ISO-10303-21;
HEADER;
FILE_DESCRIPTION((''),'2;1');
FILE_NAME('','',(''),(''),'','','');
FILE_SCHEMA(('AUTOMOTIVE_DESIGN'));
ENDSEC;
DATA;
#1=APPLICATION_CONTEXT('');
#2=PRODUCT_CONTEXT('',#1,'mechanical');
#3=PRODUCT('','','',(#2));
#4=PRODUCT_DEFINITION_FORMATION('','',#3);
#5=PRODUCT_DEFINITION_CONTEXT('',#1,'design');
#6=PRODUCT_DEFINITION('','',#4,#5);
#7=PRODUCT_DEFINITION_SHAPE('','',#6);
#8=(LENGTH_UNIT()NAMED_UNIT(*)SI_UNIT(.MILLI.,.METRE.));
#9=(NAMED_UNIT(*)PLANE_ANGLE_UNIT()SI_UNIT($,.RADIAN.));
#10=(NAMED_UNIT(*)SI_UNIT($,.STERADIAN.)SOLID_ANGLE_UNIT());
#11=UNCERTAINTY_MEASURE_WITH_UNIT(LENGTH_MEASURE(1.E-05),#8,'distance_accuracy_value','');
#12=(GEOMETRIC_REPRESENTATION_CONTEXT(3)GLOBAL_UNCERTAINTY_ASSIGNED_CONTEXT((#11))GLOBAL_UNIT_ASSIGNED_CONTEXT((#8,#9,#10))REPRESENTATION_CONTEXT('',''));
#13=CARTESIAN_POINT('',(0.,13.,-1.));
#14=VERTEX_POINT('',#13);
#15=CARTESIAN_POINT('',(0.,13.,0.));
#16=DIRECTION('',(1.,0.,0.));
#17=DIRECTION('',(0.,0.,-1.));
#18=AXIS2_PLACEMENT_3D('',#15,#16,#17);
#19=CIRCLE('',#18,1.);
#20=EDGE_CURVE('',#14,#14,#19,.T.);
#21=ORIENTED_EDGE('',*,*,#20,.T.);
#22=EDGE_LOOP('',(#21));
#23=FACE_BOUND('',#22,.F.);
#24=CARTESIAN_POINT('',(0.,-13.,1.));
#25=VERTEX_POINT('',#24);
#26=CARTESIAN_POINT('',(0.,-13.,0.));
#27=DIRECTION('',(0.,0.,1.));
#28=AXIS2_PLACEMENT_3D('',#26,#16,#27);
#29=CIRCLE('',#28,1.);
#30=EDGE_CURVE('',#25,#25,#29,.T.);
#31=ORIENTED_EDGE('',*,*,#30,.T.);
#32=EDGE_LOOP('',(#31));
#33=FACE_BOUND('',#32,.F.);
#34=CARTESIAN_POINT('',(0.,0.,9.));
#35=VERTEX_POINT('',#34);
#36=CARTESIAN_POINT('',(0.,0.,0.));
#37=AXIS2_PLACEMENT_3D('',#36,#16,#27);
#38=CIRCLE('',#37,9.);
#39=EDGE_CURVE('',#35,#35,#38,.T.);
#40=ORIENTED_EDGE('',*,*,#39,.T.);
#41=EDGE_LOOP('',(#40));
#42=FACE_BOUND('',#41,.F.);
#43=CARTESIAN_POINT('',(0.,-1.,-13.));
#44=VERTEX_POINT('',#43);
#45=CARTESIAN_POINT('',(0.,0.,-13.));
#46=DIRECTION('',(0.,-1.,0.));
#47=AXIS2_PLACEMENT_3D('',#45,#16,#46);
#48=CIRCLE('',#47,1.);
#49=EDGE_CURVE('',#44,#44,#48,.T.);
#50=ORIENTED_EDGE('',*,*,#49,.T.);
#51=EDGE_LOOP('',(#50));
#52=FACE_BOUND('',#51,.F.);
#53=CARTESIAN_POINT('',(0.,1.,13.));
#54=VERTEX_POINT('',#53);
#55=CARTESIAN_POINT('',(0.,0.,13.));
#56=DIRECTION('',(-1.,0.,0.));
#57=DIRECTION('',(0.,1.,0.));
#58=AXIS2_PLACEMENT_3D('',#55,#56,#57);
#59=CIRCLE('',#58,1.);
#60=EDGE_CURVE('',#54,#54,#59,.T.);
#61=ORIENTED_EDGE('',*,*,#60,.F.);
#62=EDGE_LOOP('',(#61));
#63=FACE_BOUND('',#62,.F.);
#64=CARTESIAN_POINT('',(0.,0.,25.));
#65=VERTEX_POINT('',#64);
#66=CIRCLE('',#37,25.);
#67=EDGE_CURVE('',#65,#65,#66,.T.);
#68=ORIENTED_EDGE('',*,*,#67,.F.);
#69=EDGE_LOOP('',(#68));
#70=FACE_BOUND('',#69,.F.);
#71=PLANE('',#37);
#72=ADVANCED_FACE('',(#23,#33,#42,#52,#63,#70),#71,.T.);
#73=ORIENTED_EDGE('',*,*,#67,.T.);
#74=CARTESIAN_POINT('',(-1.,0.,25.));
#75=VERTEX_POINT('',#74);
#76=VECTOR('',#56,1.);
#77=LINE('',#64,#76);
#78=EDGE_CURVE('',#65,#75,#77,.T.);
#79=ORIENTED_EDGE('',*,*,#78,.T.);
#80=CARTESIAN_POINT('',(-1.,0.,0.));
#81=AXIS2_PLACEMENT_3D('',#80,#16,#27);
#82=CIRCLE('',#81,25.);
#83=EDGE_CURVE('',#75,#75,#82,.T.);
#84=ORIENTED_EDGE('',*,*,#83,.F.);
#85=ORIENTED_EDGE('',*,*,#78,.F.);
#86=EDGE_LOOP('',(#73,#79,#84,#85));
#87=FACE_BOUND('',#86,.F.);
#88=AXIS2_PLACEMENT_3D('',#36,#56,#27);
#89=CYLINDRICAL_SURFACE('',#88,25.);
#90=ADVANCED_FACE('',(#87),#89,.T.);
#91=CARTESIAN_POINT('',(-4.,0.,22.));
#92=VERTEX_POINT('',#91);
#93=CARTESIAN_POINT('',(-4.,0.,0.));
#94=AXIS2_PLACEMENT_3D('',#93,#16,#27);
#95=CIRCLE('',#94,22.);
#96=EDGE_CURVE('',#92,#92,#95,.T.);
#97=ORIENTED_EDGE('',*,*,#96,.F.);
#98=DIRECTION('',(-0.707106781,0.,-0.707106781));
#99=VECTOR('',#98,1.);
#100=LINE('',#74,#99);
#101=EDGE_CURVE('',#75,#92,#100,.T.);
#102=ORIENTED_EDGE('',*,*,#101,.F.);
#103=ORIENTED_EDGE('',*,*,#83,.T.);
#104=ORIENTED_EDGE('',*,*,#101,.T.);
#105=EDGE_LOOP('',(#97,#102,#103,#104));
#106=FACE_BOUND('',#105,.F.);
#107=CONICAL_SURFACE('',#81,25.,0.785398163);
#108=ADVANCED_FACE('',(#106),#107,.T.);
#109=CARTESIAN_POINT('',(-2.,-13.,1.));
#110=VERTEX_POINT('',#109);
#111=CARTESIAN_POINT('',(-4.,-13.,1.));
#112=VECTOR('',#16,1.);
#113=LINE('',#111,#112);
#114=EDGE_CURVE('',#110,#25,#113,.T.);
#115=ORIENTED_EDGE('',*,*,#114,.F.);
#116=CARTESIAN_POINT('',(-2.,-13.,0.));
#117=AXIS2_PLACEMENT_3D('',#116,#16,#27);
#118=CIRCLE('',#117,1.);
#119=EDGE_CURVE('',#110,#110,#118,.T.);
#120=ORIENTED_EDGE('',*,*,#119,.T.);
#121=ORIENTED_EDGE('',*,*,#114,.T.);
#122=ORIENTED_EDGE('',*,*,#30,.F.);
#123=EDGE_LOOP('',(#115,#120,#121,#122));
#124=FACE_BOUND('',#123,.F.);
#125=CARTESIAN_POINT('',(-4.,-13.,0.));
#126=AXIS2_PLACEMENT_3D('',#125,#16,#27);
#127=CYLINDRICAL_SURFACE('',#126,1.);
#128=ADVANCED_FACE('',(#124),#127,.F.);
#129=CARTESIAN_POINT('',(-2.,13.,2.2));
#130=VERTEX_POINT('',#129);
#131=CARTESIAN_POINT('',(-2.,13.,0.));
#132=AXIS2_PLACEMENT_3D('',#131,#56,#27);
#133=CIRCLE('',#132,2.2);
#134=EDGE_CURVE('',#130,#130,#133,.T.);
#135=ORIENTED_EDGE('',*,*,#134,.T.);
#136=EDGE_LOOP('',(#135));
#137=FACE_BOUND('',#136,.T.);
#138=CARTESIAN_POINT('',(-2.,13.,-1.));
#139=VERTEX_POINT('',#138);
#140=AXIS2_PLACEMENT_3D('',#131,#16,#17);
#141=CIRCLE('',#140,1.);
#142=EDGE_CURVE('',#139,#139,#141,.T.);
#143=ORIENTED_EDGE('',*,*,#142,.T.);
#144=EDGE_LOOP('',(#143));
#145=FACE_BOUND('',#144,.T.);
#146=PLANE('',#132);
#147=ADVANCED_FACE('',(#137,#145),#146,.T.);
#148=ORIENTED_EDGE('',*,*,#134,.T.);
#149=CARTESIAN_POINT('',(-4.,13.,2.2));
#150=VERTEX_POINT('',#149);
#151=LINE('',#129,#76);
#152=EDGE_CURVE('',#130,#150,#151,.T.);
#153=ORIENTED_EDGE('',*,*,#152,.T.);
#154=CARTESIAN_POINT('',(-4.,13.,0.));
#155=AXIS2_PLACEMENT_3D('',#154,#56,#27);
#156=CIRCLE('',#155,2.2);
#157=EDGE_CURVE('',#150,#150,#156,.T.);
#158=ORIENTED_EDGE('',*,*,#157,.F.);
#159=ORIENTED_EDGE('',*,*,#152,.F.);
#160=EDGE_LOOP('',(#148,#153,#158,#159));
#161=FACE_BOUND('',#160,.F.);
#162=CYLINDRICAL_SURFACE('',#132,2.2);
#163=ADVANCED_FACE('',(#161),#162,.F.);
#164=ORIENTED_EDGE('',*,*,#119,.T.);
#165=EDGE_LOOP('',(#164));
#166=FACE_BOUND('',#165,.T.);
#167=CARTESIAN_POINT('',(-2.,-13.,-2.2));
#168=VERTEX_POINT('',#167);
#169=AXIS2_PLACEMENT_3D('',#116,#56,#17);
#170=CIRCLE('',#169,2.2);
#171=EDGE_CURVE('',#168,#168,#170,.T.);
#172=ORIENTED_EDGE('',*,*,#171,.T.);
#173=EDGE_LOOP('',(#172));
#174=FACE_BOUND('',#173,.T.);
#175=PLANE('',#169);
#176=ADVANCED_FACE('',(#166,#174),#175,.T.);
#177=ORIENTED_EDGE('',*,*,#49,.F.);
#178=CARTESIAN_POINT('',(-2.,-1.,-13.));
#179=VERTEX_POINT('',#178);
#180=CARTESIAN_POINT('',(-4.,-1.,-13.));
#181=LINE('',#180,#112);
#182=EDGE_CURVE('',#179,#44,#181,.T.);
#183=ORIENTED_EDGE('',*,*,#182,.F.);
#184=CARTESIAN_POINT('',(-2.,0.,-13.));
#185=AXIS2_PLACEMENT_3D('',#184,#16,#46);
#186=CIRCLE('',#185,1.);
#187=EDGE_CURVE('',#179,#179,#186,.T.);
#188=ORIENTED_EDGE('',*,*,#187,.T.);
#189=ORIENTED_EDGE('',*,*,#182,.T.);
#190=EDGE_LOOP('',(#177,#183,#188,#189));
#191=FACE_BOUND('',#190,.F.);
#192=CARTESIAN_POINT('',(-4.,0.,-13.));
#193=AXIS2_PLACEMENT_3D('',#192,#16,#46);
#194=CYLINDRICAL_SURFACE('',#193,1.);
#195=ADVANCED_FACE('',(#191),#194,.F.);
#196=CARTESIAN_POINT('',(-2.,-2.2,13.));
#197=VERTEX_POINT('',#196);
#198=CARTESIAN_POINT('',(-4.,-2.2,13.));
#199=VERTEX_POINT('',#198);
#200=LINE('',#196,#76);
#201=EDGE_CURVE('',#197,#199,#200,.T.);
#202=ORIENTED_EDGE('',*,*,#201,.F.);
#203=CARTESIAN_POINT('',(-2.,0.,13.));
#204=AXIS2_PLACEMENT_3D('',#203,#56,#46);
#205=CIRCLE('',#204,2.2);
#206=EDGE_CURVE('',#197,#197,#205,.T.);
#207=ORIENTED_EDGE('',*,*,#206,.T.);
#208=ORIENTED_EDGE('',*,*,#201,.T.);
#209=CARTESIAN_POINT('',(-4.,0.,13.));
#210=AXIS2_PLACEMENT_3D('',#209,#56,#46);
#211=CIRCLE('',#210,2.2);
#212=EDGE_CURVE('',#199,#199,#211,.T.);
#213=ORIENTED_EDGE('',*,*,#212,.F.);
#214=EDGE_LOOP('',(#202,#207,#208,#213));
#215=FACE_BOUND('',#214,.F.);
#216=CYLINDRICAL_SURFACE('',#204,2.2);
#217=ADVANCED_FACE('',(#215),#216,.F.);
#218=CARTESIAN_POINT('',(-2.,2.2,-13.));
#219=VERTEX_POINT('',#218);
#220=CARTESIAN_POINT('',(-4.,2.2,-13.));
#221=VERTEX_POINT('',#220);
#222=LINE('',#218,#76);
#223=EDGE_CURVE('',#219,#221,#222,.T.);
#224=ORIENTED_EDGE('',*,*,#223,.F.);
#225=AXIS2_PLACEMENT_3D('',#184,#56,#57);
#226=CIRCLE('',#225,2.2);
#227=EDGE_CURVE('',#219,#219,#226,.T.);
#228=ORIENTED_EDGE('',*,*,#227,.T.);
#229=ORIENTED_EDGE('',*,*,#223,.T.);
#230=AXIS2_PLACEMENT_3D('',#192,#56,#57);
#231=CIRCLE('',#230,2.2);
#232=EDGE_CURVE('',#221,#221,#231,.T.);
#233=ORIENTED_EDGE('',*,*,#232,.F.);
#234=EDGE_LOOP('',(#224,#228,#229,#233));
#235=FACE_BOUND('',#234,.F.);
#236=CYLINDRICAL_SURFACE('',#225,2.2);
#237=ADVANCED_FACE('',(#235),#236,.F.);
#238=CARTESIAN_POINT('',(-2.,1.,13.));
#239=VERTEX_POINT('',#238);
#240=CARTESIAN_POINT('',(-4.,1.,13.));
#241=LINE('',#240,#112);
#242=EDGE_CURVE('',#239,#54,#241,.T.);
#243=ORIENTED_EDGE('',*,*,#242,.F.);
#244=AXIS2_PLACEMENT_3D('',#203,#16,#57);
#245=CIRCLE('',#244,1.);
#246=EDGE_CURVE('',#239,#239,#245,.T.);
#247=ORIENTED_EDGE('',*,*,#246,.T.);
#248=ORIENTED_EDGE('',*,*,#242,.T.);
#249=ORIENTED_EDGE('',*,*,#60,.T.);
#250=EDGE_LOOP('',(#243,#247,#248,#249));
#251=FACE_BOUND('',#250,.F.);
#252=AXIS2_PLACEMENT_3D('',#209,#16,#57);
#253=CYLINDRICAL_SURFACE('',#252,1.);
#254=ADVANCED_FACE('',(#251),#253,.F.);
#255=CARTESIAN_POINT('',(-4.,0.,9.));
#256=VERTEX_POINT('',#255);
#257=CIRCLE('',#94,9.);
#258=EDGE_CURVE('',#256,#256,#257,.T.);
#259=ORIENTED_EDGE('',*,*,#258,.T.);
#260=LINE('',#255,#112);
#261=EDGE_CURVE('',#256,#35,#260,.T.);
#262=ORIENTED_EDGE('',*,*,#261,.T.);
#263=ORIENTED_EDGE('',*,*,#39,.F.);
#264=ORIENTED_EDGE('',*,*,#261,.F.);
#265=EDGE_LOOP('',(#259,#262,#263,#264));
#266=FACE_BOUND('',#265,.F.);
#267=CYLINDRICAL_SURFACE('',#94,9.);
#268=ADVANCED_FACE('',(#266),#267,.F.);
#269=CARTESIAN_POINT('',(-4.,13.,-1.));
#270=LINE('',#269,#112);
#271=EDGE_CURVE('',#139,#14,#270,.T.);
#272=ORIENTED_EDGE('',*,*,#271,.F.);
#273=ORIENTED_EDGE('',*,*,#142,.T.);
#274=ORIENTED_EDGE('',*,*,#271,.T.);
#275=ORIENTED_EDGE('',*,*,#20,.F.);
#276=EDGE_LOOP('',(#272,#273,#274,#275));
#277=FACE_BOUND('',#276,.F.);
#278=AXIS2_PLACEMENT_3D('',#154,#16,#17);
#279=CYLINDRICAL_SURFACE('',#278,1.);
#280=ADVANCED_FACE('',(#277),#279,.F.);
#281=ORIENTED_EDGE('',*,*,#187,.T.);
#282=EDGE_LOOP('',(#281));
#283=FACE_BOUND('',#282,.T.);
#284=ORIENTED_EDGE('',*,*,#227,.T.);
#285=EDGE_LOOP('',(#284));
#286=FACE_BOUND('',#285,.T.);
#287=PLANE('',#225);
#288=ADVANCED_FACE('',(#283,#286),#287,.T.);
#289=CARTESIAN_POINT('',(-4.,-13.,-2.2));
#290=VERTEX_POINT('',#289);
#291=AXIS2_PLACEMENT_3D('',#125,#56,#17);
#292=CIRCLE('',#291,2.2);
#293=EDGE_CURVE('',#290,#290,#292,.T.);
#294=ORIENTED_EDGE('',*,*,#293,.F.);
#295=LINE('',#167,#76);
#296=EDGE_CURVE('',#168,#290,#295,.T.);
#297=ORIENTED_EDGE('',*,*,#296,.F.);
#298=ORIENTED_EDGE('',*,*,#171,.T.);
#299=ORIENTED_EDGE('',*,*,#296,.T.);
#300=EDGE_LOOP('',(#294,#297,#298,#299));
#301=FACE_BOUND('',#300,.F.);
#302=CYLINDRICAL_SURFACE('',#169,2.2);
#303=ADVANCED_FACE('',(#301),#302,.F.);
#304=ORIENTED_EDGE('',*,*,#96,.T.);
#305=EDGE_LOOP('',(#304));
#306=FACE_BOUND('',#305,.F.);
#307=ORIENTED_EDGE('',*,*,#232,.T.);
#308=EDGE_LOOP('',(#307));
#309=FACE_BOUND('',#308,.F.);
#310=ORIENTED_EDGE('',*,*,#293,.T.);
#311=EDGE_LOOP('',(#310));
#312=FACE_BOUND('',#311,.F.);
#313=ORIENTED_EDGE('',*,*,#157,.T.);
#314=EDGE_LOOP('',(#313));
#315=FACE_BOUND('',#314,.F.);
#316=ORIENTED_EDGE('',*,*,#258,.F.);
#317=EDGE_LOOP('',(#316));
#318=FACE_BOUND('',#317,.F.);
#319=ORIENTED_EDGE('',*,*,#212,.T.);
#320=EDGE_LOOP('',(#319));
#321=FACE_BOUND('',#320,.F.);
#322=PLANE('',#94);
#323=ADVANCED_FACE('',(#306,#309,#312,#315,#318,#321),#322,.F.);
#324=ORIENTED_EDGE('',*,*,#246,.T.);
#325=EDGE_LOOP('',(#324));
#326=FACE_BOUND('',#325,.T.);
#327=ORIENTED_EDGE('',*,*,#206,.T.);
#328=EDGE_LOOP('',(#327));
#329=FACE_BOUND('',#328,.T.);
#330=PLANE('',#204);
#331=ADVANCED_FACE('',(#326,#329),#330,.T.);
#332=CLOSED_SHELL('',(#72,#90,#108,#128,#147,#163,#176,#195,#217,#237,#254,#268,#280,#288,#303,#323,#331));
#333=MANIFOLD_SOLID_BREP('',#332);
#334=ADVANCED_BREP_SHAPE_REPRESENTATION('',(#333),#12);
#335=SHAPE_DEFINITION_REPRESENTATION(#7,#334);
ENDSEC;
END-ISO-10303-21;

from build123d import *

# Parameters (mm, degrees)
F3_D            = 2
F3_DEPTH        = 4
F3_CBORE_D      = 4.4
F3_CBORE_DEPTH  = 2
F3_TIP          = 0.600860619
F3_COPIES_COUNT = 4


# Not quite as in the source:
# - a pattern or mirror of a feature is missing from the dataset's text; its kind, count and spacing are read off the source's solid


with BuildPart() as f1:
    # F0 (on Front) → F1 (revolve)
    with BuildSketch(Plane.XZ):
        Polygon((-4, 9), (0, 9), (0, 25), (-1, 25), (-4, 22), align=None)
    revolve(axis=Axis((-2, 0, 0), (1, 0, 0)))

    # F3
    with Locations(Plane(origin=(-4, 0, 0), x_dir=(0, -1, 0), z_dir=(-1, 0, 0))):
        with Locations((0, 13)):
            f3 = CounterBoreHole(F3_D / 2, F3_CBORE_D / 2, F3_CBORE_DEPTH, depth=F3_DEPTH)
            with Locations((0, 0, -(F3_DEPTH + F3_TIP / 2))):  # 118° drill point
                Cone(0, F3_D / 2, F3_TIP, mode=Mode.SUBTRACT)

    # F3_copies: F3 ×4 about axis
    f3_copies_axis = Axis((0, 0, 0), (1, 0, 0))
    for i in range(1, F3_COPIES_COUNT):
        add(f3.rotate(f3_copies_axis, i * 360 / F3_COPIES_COUNT), mode=Mode.SUBTRACT)


solid = f1.part
